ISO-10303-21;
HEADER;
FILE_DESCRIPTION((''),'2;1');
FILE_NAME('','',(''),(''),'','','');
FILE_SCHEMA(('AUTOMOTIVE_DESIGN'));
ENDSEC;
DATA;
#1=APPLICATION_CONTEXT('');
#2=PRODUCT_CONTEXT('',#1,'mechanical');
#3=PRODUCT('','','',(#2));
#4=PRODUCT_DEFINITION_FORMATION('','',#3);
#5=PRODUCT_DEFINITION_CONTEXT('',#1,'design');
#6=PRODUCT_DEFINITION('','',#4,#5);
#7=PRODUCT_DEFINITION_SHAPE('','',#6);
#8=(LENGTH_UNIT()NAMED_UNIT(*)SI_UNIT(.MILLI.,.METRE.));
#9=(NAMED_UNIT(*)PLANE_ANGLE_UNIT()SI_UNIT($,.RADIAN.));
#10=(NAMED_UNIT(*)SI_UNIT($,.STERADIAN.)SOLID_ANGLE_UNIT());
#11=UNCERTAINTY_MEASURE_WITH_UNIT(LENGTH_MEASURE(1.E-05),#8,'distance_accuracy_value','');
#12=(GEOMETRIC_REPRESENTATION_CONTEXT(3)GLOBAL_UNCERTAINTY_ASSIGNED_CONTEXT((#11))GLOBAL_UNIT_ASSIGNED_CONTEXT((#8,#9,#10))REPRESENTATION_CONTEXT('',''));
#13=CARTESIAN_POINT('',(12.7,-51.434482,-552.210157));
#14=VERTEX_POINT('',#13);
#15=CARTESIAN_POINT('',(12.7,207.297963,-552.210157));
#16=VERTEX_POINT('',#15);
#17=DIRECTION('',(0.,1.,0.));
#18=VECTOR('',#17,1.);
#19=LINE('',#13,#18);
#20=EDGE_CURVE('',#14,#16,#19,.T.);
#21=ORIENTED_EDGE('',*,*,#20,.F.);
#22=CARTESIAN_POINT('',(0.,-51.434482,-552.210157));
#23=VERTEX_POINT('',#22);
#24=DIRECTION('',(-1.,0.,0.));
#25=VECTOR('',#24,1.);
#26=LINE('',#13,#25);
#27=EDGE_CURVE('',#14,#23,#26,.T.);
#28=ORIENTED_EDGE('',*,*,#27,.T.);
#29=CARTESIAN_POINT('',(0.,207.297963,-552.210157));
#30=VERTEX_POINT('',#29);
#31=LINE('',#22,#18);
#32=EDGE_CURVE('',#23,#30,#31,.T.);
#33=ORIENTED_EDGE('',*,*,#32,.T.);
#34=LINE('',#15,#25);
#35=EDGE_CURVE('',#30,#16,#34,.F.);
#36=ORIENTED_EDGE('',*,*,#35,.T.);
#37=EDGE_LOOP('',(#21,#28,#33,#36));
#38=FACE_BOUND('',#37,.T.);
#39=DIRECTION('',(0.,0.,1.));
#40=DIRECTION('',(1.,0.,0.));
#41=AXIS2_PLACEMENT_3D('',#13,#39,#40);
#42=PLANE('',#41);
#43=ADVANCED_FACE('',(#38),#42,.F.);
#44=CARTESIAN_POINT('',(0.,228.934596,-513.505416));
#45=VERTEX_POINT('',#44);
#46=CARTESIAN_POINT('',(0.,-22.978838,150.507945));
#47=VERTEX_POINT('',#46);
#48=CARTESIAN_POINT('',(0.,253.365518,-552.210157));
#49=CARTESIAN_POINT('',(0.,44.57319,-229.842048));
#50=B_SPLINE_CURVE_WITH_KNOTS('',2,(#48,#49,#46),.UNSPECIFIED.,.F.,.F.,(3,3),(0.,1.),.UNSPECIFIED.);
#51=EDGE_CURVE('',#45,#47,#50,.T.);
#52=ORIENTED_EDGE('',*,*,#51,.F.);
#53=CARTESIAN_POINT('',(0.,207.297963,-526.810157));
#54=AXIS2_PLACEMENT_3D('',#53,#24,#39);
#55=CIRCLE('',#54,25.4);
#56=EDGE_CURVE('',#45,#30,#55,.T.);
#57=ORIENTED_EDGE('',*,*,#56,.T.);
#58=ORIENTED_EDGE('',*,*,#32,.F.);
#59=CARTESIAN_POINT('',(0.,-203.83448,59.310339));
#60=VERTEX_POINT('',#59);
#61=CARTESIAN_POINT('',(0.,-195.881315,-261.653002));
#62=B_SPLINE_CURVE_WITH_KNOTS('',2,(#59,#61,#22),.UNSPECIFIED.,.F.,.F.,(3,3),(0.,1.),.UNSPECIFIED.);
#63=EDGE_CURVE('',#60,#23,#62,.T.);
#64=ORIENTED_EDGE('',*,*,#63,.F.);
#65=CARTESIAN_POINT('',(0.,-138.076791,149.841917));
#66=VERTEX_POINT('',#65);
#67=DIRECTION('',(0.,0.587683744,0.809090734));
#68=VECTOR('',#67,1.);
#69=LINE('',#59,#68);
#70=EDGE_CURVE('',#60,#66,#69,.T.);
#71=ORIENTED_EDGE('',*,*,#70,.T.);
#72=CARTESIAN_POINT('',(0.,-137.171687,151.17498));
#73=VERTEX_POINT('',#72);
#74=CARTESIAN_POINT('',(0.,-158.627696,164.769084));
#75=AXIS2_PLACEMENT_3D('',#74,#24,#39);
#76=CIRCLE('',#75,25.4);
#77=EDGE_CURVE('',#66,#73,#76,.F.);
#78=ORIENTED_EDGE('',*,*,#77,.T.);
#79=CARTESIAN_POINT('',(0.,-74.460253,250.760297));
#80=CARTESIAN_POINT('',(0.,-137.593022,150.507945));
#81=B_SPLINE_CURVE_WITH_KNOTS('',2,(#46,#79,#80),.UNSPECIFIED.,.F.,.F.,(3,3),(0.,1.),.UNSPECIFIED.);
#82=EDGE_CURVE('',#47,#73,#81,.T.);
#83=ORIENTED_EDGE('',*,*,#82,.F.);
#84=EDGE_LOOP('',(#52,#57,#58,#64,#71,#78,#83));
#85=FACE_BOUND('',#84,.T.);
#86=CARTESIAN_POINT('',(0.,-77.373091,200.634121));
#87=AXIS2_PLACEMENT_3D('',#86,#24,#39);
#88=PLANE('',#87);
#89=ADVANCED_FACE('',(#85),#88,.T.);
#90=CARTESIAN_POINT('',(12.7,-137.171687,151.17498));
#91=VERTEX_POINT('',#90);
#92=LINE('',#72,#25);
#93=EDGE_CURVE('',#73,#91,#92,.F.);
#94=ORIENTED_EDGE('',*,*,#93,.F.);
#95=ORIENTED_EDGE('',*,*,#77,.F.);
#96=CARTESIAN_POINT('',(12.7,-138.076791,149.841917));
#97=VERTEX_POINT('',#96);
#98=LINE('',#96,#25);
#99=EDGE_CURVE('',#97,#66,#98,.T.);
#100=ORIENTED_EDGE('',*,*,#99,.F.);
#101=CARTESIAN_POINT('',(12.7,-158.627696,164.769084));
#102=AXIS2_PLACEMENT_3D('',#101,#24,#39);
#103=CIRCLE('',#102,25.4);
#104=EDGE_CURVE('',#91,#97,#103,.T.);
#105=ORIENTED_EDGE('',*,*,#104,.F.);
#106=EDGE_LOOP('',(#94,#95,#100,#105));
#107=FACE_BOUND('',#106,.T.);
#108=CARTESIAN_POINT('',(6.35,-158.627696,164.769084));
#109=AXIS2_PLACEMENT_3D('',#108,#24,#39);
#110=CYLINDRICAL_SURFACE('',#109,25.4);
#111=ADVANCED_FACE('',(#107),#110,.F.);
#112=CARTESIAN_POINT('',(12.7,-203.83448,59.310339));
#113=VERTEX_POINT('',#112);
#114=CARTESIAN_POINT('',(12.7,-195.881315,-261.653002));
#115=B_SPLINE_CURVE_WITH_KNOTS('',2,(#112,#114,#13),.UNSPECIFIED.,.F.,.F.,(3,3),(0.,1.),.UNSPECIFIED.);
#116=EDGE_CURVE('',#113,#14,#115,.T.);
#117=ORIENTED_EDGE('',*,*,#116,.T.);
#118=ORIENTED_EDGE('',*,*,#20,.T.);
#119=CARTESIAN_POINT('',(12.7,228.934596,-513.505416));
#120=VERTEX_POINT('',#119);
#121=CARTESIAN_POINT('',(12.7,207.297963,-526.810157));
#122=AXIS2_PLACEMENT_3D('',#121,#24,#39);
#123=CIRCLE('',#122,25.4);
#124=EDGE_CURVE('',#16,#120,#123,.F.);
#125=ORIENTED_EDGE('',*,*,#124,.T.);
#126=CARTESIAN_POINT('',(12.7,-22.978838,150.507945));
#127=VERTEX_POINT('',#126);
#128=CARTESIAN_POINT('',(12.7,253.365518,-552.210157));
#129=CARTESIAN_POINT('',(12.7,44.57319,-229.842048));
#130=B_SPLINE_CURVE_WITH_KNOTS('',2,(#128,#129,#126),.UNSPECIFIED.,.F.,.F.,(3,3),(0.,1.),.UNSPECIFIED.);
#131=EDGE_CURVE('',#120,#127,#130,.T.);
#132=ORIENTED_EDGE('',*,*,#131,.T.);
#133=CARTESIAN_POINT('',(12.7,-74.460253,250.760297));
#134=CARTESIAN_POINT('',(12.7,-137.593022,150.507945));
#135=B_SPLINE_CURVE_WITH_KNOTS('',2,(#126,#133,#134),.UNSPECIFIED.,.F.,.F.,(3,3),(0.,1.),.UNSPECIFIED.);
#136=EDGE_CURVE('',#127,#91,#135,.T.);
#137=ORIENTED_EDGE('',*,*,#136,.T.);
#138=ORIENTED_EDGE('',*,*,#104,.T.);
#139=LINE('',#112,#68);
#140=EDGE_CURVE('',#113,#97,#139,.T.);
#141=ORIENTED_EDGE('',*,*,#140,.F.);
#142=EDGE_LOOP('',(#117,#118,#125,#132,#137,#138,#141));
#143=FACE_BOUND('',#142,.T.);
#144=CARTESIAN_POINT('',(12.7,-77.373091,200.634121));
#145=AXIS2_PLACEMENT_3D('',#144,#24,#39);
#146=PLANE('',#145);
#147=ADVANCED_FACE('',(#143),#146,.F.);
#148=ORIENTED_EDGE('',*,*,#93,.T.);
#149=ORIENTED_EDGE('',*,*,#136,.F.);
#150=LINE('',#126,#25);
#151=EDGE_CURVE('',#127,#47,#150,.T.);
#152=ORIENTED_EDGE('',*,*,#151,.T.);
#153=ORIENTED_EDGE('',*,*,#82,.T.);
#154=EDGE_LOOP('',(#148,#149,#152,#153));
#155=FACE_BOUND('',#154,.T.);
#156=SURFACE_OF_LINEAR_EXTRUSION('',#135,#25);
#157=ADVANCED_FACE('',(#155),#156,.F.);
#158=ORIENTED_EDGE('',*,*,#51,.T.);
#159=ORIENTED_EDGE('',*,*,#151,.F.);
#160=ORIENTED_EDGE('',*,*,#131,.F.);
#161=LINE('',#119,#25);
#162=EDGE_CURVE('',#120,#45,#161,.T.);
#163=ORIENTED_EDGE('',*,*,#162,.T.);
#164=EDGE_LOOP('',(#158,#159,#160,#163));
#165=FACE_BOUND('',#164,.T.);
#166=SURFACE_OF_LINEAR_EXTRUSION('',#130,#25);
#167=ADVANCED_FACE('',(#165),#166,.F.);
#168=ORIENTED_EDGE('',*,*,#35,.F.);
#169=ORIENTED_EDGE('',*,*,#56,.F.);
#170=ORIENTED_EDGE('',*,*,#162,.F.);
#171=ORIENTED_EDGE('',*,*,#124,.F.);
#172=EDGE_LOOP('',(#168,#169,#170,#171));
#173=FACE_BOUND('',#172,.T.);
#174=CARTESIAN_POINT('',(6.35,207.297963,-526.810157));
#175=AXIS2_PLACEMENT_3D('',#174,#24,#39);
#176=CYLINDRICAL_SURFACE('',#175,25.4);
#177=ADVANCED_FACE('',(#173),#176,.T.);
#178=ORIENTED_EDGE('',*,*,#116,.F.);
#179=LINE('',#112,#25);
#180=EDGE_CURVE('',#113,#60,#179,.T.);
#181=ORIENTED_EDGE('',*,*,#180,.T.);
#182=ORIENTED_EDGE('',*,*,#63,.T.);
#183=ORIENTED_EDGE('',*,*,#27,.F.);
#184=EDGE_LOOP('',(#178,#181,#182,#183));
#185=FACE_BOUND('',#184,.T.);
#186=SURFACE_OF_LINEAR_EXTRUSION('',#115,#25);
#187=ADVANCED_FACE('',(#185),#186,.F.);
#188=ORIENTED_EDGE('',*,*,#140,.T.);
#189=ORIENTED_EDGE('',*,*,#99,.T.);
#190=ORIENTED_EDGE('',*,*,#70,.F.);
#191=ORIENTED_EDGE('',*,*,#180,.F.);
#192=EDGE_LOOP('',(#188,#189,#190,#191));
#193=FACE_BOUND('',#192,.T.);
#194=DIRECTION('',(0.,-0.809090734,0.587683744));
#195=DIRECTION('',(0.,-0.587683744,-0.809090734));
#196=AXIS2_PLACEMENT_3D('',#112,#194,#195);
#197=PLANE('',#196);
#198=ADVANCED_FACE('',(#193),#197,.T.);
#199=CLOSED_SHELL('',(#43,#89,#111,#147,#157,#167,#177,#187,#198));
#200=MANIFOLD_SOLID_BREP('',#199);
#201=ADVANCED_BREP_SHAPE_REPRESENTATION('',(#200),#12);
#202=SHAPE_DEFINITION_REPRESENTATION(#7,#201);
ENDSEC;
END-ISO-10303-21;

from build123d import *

# Parameters (mm, degrees)
BOSS_EXTRUDE1_DEPTH = 12.7
FILLET1_R           = 25.4
FILLET2_R           = 25.4


with BuildPart() as part:
    # Sketch1 → Boss-Extrude1 (new body)
    with BuildSketch(Plane(origin=(0, 0, 0), x_dir=(0, 0, -1), z_dir=(1, 0, 0))):
        with BuildLine():
            Line((552.210156901, -51.434482431), (552.210156901, 253.365517569))
            add(Edge.make_bspline(
                [(552.210156901, 253.365517569), (229.842048286, 44.573189665), (-150.507944751, -22.97883784)],
                knots=[0, 0, 0, 1, 1, 1], degree=2))
            add(Edge.make_bspline(
                [(-150.507944751, -22.97883784), (-250.760296622, -74.460252601), (-150.507944751, -137.593021529)],
                knots=[0, 0, 0, 1, 1, 1], degree=2))
            Line((-150.507944751, -137.593021529), (-59.310339097, -203.834480101))
            add(Edge.make_bspline(
                [(-59.310339097, -203.834480101), (261.653002312, -195.881315467), (552.210156901, -51.434482431)],
                knots=[0, 0, 0, 1, 1, 1], degree=2))
        make_face()
    extrude(amount=BOSS_EXTRUDE1_DEPTH)

    # Fillet1
    fillet1_edges = [part.edges().sort_by_distance(p)[0] for p in [
        (6.35, 253.365517569, -552.210156901),
    ]]
    fillet(fillet1_edges, radius=FILLET1_R)

    # Fillet2
    # the kernel refuses this fillet: 25.4 mm, written as the material it adds along each edge
    with BuildSketch(Plane(origin=(0, -137.593021529, 150.507944751), x_dir=(0, -0.5876837443751272, -0.8090907344650724), z_dir=(1, 0, 0))) as fillet2_piece_1:
        with BuildLine():
            CenterArc((0.823180345, -25.4), FILLET2_R, 90, 3.635270522)
            ThreePointArc((-0.787303597, -0.051107687), (-0.393634255, -0.025824092), (0, 0))
            Line((0, 0), (0.823180345, 0))
        make_face()
    extrude(amount=12.7)


solid = part.part
